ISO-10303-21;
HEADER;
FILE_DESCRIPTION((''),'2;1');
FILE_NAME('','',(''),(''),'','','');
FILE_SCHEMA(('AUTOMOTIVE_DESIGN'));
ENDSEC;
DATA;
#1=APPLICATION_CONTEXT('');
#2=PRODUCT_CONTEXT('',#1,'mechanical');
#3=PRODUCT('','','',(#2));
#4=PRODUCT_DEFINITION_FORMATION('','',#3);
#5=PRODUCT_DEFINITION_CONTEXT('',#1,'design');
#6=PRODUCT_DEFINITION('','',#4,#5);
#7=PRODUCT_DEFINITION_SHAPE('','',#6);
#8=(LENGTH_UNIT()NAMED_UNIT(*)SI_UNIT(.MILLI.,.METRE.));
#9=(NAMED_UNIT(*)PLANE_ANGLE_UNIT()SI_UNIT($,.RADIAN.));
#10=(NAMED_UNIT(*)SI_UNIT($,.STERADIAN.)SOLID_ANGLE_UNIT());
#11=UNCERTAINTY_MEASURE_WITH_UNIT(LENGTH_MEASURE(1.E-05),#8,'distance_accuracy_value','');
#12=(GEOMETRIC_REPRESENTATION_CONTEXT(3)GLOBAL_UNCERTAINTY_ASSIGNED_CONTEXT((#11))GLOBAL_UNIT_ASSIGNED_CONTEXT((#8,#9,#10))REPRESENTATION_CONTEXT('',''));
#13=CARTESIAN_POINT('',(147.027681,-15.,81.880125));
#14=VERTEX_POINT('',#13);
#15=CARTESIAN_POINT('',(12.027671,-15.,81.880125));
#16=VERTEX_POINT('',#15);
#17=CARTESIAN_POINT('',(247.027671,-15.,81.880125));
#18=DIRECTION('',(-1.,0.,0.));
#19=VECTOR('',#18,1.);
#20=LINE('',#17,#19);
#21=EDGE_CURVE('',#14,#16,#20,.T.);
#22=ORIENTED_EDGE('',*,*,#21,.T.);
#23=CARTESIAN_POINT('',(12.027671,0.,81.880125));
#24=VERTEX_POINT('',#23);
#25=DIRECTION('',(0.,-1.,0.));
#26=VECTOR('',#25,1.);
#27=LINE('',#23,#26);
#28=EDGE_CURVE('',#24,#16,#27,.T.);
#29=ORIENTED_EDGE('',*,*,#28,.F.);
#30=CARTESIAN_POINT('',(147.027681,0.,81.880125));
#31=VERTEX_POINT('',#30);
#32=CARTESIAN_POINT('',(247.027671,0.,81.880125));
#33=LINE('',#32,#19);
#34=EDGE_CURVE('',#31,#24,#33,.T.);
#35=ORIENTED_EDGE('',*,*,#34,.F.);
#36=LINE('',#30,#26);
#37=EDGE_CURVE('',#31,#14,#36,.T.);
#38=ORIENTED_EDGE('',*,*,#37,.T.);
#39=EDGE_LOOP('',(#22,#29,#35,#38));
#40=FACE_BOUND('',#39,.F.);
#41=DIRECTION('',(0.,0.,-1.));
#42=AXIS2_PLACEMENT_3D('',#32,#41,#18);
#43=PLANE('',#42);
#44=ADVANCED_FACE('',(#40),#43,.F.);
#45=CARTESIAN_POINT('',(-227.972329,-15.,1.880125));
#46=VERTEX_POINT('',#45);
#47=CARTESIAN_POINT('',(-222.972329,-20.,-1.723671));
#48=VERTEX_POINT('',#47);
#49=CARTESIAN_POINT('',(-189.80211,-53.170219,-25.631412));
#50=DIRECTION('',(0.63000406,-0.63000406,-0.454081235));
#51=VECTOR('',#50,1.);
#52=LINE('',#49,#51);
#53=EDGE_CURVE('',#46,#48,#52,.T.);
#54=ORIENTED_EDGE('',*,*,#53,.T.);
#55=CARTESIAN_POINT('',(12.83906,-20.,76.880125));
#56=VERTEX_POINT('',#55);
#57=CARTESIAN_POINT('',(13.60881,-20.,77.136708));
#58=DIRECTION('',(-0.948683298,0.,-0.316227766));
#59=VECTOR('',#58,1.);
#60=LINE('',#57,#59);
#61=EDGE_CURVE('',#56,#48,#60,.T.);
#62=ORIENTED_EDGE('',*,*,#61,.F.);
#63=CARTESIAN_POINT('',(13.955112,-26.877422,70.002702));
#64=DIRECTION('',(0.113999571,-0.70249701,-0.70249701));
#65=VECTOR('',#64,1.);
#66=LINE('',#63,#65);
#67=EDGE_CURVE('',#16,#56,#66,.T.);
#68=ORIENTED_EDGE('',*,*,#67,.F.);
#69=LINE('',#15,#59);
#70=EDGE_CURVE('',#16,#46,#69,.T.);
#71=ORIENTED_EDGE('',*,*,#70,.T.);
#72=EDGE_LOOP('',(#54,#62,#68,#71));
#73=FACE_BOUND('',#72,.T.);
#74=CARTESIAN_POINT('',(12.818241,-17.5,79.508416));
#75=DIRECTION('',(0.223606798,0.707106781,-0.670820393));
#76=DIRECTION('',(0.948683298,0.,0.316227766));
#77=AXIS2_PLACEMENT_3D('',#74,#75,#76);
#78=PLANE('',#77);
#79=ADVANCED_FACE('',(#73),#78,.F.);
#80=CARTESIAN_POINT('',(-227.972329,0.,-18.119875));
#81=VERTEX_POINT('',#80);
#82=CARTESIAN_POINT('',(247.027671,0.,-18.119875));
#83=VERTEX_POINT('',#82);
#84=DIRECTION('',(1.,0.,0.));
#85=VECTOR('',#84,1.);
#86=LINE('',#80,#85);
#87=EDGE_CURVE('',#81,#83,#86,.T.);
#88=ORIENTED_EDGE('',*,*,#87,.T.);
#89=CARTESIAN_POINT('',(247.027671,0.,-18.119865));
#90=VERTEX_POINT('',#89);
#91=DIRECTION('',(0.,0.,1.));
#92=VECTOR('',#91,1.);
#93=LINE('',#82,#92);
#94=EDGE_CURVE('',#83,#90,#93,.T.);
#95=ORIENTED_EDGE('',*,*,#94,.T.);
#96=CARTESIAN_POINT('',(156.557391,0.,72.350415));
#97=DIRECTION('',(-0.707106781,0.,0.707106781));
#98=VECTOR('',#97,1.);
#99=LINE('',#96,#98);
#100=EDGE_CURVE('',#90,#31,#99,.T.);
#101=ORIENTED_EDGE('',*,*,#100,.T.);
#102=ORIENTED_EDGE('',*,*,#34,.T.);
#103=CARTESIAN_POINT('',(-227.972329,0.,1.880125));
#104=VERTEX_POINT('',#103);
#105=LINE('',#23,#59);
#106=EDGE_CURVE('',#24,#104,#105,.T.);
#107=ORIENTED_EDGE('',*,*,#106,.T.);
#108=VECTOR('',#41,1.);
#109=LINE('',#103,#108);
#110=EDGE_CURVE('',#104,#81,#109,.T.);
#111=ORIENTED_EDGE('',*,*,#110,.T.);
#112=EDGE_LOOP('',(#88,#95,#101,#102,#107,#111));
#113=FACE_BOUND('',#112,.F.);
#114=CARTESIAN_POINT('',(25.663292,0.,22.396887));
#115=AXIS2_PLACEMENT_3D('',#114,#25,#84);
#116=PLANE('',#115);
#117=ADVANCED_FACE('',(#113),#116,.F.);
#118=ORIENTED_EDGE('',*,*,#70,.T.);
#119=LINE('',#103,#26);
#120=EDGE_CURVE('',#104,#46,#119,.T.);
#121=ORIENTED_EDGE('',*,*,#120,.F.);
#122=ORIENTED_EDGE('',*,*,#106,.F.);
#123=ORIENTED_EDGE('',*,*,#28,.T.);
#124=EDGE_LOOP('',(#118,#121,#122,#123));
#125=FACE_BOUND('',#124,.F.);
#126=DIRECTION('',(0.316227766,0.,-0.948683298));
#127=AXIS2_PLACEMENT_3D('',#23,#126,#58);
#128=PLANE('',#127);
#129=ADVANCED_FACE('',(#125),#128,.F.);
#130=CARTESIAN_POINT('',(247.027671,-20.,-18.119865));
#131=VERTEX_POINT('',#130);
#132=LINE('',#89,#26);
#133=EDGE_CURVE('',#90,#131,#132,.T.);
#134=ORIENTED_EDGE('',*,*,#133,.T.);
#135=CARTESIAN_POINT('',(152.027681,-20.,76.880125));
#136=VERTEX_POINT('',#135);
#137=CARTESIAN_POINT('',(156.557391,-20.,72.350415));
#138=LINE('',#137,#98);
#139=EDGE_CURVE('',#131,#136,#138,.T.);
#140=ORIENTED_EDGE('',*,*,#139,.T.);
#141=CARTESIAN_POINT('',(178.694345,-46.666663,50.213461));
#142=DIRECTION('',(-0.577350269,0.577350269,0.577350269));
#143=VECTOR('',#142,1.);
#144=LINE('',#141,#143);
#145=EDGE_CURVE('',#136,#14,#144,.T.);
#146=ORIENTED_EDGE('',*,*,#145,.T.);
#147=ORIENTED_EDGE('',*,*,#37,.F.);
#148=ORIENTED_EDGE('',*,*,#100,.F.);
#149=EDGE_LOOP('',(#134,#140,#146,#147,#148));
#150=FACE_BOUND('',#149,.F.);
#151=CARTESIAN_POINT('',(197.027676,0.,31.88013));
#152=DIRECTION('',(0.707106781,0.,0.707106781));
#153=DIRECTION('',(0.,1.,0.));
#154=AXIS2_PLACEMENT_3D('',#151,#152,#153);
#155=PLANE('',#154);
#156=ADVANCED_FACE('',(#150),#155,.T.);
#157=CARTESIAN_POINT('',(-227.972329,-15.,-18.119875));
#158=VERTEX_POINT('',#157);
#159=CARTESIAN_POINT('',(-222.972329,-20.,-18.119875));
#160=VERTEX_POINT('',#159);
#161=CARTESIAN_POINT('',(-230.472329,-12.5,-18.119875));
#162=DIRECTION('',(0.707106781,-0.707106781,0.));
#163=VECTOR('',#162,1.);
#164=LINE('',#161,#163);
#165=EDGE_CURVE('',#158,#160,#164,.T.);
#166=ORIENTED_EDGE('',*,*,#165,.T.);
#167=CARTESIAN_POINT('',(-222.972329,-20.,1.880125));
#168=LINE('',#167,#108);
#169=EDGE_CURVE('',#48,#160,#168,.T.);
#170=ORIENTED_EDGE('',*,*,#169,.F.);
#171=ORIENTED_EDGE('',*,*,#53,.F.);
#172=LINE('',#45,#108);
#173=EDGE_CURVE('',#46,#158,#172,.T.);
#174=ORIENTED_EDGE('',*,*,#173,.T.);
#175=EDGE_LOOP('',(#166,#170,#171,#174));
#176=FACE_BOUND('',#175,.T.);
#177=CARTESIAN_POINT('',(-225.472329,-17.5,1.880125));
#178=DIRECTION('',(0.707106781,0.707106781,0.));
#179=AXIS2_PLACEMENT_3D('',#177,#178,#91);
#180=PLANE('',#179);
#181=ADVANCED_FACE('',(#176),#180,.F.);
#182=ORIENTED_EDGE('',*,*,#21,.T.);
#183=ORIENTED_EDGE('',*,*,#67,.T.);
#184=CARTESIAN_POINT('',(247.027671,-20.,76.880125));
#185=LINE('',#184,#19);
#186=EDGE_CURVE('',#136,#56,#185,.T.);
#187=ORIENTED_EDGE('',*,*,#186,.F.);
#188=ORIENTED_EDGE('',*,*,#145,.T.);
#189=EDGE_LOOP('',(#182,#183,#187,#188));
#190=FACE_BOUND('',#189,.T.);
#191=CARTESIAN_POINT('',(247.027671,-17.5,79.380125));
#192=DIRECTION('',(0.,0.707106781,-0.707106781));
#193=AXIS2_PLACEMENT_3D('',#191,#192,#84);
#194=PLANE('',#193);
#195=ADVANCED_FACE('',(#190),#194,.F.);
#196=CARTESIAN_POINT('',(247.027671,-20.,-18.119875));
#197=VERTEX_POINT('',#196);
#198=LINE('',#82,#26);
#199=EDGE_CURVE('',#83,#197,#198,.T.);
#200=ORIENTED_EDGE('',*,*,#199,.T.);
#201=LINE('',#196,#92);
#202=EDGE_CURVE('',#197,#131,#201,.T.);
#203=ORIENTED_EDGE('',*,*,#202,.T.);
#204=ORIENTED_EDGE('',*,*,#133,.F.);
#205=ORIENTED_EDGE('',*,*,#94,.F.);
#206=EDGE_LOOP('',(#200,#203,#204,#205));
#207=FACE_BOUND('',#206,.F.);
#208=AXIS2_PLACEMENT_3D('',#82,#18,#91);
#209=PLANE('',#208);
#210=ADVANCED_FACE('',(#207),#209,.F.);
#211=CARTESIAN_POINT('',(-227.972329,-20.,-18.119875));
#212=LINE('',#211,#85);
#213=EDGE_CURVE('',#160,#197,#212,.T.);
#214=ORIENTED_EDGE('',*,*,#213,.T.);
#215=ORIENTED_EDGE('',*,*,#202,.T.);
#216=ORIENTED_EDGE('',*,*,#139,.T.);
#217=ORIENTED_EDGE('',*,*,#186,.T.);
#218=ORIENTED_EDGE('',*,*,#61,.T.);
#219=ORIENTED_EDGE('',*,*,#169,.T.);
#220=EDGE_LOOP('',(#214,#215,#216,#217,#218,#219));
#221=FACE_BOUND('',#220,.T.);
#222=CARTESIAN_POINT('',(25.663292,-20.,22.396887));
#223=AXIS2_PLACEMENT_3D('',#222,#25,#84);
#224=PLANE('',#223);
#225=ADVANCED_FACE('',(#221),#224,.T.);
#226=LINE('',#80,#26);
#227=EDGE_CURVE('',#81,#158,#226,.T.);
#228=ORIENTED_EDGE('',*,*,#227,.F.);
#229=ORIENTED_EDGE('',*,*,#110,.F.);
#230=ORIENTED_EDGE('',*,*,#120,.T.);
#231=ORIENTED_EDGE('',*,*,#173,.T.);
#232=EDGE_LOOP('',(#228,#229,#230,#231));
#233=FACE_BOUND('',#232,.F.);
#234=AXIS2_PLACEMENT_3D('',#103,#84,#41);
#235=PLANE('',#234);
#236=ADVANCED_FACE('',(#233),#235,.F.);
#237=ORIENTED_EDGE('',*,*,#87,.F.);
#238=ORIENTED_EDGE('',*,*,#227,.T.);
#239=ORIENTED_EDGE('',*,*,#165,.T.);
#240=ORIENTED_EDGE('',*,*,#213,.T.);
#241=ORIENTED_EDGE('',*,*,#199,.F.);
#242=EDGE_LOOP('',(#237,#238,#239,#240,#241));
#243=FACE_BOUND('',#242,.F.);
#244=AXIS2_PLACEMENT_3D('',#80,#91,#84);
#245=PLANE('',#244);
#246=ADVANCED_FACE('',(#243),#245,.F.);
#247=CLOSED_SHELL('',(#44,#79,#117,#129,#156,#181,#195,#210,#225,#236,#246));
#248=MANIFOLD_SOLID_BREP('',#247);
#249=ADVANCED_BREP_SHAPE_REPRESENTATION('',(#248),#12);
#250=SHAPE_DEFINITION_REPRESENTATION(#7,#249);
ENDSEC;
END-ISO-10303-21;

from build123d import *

# Parameters (mm, degrees)
F1_DEPTH = 20
F2_SIZE  = 5
F3_SIZE  = 99.99999


# Not quite as in the source:
# - a fillet or chamfer is up to 0.001 mm smaller than in the source, because OpenCascade refuses the exact size


with BuildPart() as f1:
    # F0 (on Front) → F1 (new body)
    with BuildSketch(Plane.XZ):
        Polygon((-227.9723286629, -18.1198753417), (247.0276713371, -18.1198753417), (247.0276713371, 81.8801246583), (12.0276713371, 81.8801246583), (-227.9723286629, 1.8801246583), align=None)
    extrude(amount=F1_DEPTH)

    # F2
    f2_edges = [f1.edges().sort_by_distance(p)[0] for p in [
        (-107.972329, -20, 41.880125),
        (129.527671, -20, 81.880125),
        (-227.972329, -20, -8.119875),
    ]]
    chamfer(f2_edges, length=F2_SIZE)

    # F3 (size 100 in the source; OpenCascade refuses exactly that, so slightly less here)
    f3_edges = [f1.edges().sort_by_distance(p)[0] for p in [
        (247.027671, -7.5, 81.880125),
    ]]
    chamfer(f3_edges, length=F3_SIZE)


solid = f1.part
